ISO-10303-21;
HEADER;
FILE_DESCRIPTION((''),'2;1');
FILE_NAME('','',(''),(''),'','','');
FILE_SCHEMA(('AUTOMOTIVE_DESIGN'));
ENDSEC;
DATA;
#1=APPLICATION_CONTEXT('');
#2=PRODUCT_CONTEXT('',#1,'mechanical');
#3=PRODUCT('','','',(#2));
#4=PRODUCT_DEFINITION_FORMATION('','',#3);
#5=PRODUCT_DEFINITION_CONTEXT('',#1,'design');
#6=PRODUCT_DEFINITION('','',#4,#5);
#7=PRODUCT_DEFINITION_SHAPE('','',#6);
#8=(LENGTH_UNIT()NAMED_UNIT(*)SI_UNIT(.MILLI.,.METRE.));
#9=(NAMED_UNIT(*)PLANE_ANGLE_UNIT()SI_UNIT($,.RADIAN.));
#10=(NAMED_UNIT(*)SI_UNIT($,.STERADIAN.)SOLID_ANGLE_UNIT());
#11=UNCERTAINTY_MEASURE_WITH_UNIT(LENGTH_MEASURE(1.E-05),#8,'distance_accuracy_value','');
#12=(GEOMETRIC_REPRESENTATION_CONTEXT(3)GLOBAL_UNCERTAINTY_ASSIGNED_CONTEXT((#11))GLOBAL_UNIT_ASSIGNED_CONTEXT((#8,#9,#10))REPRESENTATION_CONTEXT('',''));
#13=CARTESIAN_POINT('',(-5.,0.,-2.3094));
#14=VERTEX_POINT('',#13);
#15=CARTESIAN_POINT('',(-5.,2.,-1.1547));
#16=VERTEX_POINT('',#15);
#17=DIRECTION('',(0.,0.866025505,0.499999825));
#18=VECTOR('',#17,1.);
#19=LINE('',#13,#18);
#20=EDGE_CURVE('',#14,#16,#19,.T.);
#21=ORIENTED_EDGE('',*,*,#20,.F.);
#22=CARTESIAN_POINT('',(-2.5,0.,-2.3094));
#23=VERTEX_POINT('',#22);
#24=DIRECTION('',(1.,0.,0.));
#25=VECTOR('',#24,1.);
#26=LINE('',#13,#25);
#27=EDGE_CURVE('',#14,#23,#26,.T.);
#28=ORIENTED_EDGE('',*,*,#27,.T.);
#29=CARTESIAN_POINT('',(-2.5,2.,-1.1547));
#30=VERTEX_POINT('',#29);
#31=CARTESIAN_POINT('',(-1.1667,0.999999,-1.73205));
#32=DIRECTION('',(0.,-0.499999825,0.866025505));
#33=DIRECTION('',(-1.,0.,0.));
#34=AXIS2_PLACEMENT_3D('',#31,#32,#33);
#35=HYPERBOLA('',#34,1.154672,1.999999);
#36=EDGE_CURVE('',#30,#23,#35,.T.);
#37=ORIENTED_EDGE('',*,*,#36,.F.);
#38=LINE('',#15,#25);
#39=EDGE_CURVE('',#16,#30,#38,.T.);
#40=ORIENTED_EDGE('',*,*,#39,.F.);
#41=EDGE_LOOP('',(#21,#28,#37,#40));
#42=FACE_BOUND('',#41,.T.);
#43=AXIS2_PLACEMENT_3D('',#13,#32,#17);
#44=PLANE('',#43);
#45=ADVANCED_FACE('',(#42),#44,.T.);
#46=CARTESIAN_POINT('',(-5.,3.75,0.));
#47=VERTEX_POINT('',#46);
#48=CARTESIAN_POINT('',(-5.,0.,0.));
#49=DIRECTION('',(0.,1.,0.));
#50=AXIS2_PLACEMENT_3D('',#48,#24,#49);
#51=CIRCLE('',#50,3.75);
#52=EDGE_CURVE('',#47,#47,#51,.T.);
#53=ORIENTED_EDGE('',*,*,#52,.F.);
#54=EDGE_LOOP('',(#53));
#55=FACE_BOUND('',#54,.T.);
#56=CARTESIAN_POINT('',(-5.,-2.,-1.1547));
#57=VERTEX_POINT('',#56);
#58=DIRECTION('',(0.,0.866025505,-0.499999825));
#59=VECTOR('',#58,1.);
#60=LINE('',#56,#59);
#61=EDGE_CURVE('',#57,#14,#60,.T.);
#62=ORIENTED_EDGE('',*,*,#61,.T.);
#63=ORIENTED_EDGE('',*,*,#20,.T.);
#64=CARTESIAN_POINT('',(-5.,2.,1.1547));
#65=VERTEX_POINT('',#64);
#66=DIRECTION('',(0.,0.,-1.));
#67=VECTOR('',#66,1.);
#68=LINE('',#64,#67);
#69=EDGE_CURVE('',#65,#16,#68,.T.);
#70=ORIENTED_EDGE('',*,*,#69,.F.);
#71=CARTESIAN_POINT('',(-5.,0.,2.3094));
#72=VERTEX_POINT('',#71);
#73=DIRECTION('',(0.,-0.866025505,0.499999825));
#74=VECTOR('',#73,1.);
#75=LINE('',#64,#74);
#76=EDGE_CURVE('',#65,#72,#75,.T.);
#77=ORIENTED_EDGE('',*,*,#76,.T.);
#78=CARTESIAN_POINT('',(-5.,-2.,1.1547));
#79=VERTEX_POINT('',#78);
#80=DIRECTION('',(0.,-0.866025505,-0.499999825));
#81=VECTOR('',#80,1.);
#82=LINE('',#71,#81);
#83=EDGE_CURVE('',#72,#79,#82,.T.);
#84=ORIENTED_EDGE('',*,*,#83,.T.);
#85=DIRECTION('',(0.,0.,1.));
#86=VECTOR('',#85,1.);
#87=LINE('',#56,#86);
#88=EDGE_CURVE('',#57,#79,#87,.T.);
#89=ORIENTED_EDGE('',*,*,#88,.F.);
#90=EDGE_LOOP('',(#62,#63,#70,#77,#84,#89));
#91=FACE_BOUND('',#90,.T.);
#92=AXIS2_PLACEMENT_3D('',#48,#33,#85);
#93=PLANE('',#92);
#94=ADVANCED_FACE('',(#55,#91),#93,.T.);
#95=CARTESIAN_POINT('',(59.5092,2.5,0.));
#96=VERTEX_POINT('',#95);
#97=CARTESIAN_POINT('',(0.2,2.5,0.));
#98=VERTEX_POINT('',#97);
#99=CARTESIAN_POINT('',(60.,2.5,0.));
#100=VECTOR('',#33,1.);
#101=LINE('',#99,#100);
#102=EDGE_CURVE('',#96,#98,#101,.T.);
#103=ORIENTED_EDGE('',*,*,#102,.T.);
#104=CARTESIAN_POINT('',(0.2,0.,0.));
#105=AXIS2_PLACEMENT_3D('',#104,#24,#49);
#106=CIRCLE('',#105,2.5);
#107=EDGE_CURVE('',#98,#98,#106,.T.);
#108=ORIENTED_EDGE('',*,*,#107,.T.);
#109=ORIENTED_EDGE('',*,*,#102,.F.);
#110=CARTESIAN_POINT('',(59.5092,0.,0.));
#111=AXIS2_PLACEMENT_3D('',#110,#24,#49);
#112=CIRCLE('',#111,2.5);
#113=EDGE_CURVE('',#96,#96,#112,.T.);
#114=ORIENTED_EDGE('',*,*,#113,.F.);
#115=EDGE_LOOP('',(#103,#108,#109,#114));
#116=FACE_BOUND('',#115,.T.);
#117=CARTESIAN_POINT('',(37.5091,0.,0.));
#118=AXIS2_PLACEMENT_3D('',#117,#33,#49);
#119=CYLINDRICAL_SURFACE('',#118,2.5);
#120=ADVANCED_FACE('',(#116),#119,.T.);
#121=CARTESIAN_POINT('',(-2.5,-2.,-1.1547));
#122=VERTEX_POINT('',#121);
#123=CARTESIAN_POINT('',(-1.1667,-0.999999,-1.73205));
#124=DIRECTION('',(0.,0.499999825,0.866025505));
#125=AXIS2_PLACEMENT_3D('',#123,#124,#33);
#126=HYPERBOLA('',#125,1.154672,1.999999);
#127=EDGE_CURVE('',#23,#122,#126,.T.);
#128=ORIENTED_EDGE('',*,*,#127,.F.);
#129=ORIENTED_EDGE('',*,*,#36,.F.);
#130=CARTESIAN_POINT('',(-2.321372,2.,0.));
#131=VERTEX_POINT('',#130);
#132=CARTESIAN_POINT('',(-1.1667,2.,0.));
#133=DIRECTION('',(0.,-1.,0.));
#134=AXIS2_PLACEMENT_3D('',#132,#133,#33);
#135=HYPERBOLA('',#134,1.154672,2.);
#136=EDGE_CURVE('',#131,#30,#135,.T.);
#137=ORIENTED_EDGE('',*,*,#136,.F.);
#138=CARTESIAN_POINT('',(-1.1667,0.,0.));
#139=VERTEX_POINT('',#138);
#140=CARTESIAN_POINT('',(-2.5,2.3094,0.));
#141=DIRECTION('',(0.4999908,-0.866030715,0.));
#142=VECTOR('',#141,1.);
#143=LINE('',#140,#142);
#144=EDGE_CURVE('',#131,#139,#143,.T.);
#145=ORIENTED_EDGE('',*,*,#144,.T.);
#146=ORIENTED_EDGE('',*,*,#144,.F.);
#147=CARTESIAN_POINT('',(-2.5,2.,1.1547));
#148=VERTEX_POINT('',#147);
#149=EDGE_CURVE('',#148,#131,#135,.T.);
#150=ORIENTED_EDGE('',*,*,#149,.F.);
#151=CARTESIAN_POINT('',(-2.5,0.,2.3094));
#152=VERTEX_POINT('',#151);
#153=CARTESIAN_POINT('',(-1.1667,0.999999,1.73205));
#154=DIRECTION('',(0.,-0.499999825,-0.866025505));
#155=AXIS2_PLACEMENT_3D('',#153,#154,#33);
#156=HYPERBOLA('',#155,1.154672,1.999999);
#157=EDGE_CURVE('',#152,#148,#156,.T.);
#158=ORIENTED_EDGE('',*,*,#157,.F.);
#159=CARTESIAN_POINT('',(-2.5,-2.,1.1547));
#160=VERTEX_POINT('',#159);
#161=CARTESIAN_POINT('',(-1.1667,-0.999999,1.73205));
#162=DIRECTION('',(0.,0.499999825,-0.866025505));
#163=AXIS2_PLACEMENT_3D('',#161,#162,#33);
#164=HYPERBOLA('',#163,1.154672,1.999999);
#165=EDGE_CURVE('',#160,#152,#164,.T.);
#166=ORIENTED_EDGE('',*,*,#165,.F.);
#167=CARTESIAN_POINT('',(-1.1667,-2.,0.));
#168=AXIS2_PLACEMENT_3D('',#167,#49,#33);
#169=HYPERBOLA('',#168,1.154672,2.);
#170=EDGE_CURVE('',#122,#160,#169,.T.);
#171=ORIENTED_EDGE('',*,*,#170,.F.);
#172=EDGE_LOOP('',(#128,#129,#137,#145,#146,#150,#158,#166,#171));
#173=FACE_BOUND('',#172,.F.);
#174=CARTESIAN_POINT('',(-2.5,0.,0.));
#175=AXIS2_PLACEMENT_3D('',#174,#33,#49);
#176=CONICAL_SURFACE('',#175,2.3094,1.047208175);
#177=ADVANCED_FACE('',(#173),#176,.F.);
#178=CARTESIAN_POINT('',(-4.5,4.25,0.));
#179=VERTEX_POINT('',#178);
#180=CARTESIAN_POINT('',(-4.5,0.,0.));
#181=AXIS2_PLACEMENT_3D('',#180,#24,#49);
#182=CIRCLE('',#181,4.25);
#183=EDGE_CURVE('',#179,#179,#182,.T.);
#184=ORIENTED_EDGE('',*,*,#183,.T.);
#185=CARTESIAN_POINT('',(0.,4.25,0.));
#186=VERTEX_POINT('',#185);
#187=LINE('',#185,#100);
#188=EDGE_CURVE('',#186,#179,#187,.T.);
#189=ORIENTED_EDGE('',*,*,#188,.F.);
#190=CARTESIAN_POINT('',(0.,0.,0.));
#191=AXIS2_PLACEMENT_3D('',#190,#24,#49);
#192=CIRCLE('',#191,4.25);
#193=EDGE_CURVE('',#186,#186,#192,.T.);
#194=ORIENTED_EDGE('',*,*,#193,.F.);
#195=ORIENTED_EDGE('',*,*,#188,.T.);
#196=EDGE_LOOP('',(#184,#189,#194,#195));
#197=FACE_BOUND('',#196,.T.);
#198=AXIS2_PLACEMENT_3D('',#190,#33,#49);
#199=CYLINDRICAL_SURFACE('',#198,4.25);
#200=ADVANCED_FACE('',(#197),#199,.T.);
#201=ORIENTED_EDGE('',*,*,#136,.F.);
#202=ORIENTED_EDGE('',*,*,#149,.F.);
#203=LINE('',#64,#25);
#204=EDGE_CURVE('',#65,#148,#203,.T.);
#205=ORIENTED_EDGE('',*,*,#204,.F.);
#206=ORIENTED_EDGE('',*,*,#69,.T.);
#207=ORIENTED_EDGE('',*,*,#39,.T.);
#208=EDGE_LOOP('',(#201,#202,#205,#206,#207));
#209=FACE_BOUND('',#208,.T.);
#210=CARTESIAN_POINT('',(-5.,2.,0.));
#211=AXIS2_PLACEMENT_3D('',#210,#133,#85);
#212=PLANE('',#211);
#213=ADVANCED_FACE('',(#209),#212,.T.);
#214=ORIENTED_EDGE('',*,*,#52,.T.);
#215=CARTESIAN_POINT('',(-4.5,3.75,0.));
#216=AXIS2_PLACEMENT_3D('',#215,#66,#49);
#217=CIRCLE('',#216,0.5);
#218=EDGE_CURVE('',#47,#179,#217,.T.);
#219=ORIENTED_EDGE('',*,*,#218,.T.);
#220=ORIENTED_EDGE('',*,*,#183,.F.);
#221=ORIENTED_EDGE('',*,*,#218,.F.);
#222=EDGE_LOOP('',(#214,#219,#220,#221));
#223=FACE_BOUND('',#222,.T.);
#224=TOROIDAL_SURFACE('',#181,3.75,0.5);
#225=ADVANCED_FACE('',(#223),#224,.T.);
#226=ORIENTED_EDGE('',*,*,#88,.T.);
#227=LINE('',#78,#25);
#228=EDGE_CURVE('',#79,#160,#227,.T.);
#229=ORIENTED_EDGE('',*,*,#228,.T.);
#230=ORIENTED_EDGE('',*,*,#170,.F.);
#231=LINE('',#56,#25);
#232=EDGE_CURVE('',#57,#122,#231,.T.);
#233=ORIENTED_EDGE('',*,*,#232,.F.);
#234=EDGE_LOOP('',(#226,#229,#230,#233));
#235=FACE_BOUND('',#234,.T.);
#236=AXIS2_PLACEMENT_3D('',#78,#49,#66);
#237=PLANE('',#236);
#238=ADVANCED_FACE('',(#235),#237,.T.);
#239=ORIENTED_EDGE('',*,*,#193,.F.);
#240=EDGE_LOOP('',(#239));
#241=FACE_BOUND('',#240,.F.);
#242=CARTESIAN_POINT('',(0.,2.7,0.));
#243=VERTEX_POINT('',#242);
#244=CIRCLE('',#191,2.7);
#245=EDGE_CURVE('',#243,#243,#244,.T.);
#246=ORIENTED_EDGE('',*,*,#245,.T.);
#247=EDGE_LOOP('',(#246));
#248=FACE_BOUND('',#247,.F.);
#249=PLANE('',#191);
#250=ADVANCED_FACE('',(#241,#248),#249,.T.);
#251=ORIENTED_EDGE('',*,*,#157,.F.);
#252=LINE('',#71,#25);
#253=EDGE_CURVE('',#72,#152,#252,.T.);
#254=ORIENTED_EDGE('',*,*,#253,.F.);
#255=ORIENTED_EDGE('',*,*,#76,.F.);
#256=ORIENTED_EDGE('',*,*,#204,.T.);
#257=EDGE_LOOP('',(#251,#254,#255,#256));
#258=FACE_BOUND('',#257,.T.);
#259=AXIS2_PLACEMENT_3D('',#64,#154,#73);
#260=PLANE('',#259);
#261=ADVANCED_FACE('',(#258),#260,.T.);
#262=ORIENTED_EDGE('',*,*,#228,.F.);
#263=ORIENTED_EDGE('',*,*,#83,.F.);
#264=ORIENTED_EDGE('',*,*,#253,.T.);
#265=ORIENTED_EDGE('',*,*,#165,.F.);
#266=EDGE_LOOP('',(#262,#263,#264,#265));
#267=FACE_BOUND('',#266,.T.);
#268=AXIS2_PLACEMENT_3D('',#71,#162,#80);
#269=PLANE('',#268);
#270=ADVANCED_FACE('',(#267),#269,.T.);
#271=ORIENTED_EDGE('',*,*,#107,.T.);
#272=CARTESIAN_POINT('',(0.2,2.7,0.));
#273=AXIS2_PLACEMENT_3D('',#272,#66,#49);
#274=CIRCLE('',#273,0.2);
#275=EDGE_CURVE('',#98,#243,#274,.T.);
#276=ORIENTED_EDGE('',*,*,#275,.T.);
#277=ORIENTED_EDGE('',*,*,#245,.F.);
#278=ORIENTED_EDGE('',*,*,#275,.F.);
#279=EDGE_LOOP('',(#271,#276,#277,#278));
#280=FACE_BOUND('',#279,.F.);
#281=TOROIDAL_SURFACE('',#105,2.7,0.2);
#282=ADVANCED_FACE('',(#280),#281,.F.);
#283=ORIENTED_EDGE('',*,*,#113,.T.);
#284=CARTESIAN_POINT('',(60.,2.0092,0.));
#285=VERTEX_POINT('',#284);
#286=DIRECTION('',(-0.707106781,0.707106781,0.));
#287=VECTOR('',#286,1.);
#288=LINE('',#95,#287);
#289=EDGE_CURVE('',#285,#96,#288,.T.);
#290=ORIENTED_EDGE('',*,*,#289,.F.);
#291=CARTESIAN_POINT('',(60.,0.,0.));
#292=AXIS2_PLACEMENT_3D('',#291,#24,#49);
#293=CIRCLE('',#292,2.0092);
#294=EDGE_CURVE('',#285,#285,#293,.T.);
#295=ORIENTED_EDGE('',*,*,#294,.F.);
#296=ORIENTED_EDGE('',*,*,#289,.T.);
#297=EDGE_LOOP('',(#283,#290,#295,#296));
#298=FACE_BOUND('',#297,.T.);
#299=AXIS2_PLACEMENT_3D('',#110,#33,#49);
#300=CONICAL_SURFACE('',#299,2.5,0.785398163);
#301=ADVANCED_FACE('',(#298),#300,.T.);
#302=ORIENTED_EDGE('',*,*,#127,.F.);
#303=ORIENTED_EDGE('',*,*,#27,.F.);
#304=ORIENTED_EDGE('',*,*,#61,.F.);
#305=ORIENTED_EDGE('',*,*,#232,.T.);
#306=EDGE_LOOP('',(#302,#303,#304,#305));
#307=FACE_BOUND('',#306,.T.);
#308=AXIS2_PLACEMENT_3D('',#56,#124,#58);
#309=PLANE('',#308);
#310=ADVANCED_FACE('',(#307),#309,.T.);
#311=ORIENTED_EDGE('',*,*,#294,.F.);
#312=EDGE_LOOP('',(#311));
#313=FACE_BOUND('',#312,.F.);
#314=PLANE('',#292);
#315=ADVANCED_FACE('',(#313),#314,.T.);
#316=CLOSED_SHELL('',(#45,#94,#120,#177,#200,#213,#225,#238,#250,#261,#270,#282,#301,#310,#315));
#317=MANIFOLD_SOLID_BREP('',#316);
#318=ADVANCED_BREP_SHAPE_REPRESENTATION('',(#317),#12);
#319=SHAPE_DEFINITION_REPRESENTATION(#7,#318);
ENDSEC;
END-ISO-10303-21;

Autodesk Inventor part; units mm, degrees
ref_plane "YZ Plane" through (0, 0, 0) normal (1, 0, 0) x (0, 1, 0)
ref_plane "XZ Plane" through (0, 0, 0) normal (0, 1, 0) x (-1, 0, 0)
sketch "Sketch1" plane through (0, 0, 0) normal (0, 0, 1) x (1, 0, 0)
  line L0 (-1.1667, 0) -> (60, 0)
  line L1 (60, 0) -> (60, 2.5)
  line L2 (60, 2.5) -> (38, 2.5)
  line L3 (38, 2.5) -> (37.5091, 2.5)
  line L4 (37.5091, 2.5) -> (0, 2.5)
  line L5 (0, 2.5) -> (0, 4.25)
  line L6 (0, 4.25) -> (-5, 4.25)
  line L7 (-5, 4.25) -> (-5, 2.3094)
  line L8 (-5, 2.3094) -> (-2.5, 2.3094)
  line L9 (-2.5, 2.3094) -> (-1.1667, 0)
  line L10 (-22, 0) -> (97, 0) projected
  line L11 (0, -0.85) -> (0, 5.1) projected
  line L12 (38, 2.5) -> (0, 2.5) construction
  dimension "d1" = 22
  dimension "d2" = 0.4909
  dimension "d3" = 5
  dimension "d4" = 2.5
  dimension "d5" = 60
  dimension "d6" = 5
  dimension "d7" = 5
  dimension "d8" = 4.6188
  dimension "d9" = 8.5
  dimension "d26" = 60
revolve "Body" add sketch "Sketch1" angle 360 about axis through (-1.1667, 0, 0) along (1, 0, 0)
sketch "Sketch2" plane through (-5, 0, 0) normal (-1, 0, 0) x (0, 0, 1)
  circle A0 centre (0, 0) radius 2.3094 projected
  line L0 (0, -5.95) -> (0, 5.95) projected
  line L1 (-5.95, 0) -> (5.95, 0) projected
  line L2 (2.3094, 0) -> (1.1547, -2)
  line L3 (1.1547, -2) -> (-1.1547, -2)
  line L4 (-1.1547, -2) -> (-2.3094, 0)
  line L5 (-2.3094, 0) -> (-1.1547, 2)
  line L6 (-1.1547, 2) -> (1.1547, 2)
  line L7 (1.1547, 2) -> (2.3094, 0)
extrude "Slot" add sketch "Sketch2" against normal up to next contours L7 A0 | A0 L2 | L6 L0 A0 | A0 L0 L3 | L0 L6 A0 | A0 L3 L0 | L4 A0 | A0 L5
fillet "Fillet1" radius 0.5 1 edges at (-5, -4.25, 0)
thread "Thread" size "M5x0.8" class "6g" standard "ISO Metric profile" length 22
chamfer "Chamfer1" distance 0.4908 distance2 0.4908 1 edges at (60, -2.5, 0) measured on face at (60, -0.6238, -0.819)
ref_plane "Work Plane1" through (29, 0, 0) normal (0, -1, 0) x (1, 0, 0)
fillet "Fillet2" radius 0.2 1 edges at (0, -2.5, 0)
equation "\"d30\" = R"
equation "\"d17\" = RR"
equation "\"d13\" = GEL"
equation "\"d15\" = -0.5 * SPD + 0.5 * GD"
equation "\"d16\" = GUL"
equation "\"d1\" = GEL"
equation "\"d3\" = KOH"
equation "\"d4\" = INTI"
equation "\"d6\" = GD"
equation "\"d7\" = BDM"
equation "\"d8\" = 1.1547 * SW"
equation "\"d9\" = KOD"
equation "\"d26\" = NLG"
equation "\"GD\" = NND"
equation "\"NLG\" = 60"
equation "\"GEL\" = 22"
equation "\"KOD\" = 8.5"
equation "\"KOH\" = 5"
equation "\"INTI\" = 2.5"
equation "\"GAL\" = 0.61345 * PTC"
equation "\"GUL\" = 0.61345 * PTC"
equation "\"BDM\" = NND"
equation "\"SW\" = 4"
equation "\"RR\" = 0.5"
equation "\"SPD\" = NND - 1.2269 * PTC"
equation "\"R\" = 0.2"
equation "\"TOA\" = 30deg"
equation "\"GD1\" = THREADDIA - 1.2269 * PTC"
equation "\"THREADDIA\" = 5"
equation "\"FAWI\" = 45deg"
equation "\"ANG\" = 120deg"
equation "\"PTC\" = 0.8"
equation "\"NND\" = 5"
equation "\"E0\" = 1.155 * SW"
properties material "Steel, Mild"
